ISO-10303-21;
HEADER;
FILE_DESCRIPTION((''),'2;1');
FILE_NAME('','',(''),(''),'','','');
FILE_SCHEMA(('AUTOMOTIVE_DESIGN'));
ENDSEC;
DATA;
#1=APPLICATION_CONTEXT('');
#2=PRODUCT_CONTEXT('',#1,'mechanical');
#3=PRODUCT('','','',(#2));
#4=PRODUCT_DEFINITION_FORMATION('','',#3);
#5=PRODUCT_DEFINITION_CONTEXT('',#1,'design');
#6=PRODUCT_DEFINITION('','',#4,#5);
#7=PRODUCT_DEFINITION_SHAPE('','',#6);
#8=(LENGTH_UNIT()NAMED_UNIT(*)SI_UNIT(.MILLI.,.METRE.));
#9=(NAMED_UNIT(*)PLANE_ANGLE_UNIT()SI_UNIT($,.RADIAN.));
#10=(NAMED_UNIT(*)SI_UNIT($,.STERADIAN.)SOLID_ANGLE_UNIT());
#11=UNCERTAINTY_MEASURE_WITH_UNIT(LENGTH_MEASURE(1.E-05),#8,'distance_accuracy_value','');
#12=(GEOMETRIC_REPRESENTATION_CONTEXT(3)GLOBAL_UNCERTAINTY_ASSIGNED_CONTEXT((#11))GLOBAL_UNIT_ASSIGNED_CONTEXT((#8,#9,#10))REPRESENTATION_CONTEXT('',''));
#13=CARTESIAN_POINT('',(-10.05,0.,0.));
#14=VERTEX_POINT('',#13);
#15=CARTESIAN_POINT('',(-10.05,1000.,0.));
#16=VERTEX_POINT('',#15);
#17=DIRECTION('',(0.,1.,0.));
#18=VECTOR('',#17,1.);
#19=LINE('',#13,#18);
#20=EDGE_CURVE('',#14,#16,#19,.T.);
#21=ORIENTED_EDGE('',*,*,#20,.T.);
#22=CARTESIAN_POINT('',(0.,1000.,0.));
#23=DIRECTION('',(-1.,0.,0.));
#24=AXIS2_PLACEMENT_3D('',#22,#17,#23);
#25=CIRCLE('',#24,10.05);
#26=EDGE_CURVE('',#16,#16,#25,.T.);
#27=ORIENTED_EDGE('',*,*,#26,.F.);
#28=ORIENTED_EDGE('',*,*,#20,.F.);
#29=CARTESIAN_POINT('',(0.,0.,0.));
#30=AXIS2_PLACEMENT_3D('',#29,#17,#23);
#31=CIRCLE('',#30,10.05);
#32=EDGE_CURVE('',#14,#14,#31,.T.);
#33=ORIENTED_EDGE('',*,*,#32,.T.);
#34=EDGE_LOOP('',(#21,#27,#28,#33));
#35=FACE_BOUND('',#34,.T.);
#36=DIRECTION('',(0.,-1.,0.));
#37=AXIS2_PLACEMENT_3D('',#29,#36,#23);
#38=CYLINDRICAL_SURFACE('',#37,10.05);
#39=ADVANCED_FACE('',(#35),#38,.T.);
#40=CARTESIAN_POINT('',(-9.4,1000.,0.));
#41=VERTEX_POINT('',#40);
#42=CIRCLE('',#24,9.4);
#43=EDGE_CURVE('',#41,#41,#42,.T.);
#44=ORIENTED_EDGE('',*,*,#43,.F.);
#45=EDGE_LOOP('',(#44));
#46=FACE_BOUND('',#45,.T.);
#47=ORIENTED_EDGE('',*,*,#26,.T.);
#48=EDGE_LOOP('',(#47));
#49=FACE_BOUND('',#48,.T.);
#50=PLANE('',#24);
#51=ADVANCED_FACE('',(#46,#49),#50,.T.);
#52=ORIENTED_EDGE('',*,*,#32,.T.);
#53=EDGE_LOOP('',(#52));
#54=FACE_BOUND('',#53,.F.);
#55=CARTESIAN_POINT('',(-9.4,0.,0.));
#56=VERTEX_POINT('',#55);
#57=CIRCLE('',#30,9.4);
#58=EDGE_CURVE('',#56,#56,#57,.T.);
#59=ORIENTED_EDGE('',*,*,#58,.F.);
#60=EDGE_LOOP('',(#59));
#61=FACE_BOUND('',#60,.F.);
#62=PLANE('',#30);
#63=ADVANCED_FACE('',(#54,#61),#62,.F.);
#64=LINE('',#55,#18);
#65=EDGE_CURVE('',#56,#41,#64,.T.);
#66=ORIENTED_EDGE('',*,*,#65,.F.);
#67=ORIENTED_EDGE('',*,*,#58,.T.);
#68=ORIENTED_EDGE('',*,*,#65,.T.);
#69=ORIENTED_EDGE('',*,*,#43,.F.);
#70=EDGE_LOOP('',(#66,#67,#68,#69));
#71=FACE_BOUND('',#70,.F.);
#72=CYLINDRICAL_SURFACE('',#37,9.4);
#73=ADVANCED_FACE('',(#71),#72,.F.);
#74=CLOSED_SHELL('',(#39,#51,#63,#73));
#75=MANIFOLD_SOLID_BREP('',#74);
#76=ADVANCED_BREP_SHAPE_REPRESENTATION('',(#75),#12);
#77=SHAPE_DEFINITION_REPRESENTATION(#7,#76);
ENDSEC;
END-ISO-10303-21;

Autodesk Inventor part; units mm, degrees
ref_plane "YZ Plane" through (0, 0, 0) normal (1, 0, 0) x (0, 1, 0)
ref_plane "XZ Plane" through (0, 0, 0) normal (0, 1, 0) x (-1, 0, 0)
ref_plane "XY Plane" through (0, 0, 0) normal (0, 0, 1) x (1, 0, 0)
sketch "Boceto1" plane through (0, 0, 0) normal (0, 1, 0) x (-1, 0, 0)
  circle A0 centre (0, 0) radius 10.05
  circle A1 centre (0, 0) radius 9.4
  dimension "d0" = 20.1
  dimension "d1" = 18.8
extrude "Extrusión1" add sketch "Boceto1" along normal blind 1000
properties part number "Barra"
